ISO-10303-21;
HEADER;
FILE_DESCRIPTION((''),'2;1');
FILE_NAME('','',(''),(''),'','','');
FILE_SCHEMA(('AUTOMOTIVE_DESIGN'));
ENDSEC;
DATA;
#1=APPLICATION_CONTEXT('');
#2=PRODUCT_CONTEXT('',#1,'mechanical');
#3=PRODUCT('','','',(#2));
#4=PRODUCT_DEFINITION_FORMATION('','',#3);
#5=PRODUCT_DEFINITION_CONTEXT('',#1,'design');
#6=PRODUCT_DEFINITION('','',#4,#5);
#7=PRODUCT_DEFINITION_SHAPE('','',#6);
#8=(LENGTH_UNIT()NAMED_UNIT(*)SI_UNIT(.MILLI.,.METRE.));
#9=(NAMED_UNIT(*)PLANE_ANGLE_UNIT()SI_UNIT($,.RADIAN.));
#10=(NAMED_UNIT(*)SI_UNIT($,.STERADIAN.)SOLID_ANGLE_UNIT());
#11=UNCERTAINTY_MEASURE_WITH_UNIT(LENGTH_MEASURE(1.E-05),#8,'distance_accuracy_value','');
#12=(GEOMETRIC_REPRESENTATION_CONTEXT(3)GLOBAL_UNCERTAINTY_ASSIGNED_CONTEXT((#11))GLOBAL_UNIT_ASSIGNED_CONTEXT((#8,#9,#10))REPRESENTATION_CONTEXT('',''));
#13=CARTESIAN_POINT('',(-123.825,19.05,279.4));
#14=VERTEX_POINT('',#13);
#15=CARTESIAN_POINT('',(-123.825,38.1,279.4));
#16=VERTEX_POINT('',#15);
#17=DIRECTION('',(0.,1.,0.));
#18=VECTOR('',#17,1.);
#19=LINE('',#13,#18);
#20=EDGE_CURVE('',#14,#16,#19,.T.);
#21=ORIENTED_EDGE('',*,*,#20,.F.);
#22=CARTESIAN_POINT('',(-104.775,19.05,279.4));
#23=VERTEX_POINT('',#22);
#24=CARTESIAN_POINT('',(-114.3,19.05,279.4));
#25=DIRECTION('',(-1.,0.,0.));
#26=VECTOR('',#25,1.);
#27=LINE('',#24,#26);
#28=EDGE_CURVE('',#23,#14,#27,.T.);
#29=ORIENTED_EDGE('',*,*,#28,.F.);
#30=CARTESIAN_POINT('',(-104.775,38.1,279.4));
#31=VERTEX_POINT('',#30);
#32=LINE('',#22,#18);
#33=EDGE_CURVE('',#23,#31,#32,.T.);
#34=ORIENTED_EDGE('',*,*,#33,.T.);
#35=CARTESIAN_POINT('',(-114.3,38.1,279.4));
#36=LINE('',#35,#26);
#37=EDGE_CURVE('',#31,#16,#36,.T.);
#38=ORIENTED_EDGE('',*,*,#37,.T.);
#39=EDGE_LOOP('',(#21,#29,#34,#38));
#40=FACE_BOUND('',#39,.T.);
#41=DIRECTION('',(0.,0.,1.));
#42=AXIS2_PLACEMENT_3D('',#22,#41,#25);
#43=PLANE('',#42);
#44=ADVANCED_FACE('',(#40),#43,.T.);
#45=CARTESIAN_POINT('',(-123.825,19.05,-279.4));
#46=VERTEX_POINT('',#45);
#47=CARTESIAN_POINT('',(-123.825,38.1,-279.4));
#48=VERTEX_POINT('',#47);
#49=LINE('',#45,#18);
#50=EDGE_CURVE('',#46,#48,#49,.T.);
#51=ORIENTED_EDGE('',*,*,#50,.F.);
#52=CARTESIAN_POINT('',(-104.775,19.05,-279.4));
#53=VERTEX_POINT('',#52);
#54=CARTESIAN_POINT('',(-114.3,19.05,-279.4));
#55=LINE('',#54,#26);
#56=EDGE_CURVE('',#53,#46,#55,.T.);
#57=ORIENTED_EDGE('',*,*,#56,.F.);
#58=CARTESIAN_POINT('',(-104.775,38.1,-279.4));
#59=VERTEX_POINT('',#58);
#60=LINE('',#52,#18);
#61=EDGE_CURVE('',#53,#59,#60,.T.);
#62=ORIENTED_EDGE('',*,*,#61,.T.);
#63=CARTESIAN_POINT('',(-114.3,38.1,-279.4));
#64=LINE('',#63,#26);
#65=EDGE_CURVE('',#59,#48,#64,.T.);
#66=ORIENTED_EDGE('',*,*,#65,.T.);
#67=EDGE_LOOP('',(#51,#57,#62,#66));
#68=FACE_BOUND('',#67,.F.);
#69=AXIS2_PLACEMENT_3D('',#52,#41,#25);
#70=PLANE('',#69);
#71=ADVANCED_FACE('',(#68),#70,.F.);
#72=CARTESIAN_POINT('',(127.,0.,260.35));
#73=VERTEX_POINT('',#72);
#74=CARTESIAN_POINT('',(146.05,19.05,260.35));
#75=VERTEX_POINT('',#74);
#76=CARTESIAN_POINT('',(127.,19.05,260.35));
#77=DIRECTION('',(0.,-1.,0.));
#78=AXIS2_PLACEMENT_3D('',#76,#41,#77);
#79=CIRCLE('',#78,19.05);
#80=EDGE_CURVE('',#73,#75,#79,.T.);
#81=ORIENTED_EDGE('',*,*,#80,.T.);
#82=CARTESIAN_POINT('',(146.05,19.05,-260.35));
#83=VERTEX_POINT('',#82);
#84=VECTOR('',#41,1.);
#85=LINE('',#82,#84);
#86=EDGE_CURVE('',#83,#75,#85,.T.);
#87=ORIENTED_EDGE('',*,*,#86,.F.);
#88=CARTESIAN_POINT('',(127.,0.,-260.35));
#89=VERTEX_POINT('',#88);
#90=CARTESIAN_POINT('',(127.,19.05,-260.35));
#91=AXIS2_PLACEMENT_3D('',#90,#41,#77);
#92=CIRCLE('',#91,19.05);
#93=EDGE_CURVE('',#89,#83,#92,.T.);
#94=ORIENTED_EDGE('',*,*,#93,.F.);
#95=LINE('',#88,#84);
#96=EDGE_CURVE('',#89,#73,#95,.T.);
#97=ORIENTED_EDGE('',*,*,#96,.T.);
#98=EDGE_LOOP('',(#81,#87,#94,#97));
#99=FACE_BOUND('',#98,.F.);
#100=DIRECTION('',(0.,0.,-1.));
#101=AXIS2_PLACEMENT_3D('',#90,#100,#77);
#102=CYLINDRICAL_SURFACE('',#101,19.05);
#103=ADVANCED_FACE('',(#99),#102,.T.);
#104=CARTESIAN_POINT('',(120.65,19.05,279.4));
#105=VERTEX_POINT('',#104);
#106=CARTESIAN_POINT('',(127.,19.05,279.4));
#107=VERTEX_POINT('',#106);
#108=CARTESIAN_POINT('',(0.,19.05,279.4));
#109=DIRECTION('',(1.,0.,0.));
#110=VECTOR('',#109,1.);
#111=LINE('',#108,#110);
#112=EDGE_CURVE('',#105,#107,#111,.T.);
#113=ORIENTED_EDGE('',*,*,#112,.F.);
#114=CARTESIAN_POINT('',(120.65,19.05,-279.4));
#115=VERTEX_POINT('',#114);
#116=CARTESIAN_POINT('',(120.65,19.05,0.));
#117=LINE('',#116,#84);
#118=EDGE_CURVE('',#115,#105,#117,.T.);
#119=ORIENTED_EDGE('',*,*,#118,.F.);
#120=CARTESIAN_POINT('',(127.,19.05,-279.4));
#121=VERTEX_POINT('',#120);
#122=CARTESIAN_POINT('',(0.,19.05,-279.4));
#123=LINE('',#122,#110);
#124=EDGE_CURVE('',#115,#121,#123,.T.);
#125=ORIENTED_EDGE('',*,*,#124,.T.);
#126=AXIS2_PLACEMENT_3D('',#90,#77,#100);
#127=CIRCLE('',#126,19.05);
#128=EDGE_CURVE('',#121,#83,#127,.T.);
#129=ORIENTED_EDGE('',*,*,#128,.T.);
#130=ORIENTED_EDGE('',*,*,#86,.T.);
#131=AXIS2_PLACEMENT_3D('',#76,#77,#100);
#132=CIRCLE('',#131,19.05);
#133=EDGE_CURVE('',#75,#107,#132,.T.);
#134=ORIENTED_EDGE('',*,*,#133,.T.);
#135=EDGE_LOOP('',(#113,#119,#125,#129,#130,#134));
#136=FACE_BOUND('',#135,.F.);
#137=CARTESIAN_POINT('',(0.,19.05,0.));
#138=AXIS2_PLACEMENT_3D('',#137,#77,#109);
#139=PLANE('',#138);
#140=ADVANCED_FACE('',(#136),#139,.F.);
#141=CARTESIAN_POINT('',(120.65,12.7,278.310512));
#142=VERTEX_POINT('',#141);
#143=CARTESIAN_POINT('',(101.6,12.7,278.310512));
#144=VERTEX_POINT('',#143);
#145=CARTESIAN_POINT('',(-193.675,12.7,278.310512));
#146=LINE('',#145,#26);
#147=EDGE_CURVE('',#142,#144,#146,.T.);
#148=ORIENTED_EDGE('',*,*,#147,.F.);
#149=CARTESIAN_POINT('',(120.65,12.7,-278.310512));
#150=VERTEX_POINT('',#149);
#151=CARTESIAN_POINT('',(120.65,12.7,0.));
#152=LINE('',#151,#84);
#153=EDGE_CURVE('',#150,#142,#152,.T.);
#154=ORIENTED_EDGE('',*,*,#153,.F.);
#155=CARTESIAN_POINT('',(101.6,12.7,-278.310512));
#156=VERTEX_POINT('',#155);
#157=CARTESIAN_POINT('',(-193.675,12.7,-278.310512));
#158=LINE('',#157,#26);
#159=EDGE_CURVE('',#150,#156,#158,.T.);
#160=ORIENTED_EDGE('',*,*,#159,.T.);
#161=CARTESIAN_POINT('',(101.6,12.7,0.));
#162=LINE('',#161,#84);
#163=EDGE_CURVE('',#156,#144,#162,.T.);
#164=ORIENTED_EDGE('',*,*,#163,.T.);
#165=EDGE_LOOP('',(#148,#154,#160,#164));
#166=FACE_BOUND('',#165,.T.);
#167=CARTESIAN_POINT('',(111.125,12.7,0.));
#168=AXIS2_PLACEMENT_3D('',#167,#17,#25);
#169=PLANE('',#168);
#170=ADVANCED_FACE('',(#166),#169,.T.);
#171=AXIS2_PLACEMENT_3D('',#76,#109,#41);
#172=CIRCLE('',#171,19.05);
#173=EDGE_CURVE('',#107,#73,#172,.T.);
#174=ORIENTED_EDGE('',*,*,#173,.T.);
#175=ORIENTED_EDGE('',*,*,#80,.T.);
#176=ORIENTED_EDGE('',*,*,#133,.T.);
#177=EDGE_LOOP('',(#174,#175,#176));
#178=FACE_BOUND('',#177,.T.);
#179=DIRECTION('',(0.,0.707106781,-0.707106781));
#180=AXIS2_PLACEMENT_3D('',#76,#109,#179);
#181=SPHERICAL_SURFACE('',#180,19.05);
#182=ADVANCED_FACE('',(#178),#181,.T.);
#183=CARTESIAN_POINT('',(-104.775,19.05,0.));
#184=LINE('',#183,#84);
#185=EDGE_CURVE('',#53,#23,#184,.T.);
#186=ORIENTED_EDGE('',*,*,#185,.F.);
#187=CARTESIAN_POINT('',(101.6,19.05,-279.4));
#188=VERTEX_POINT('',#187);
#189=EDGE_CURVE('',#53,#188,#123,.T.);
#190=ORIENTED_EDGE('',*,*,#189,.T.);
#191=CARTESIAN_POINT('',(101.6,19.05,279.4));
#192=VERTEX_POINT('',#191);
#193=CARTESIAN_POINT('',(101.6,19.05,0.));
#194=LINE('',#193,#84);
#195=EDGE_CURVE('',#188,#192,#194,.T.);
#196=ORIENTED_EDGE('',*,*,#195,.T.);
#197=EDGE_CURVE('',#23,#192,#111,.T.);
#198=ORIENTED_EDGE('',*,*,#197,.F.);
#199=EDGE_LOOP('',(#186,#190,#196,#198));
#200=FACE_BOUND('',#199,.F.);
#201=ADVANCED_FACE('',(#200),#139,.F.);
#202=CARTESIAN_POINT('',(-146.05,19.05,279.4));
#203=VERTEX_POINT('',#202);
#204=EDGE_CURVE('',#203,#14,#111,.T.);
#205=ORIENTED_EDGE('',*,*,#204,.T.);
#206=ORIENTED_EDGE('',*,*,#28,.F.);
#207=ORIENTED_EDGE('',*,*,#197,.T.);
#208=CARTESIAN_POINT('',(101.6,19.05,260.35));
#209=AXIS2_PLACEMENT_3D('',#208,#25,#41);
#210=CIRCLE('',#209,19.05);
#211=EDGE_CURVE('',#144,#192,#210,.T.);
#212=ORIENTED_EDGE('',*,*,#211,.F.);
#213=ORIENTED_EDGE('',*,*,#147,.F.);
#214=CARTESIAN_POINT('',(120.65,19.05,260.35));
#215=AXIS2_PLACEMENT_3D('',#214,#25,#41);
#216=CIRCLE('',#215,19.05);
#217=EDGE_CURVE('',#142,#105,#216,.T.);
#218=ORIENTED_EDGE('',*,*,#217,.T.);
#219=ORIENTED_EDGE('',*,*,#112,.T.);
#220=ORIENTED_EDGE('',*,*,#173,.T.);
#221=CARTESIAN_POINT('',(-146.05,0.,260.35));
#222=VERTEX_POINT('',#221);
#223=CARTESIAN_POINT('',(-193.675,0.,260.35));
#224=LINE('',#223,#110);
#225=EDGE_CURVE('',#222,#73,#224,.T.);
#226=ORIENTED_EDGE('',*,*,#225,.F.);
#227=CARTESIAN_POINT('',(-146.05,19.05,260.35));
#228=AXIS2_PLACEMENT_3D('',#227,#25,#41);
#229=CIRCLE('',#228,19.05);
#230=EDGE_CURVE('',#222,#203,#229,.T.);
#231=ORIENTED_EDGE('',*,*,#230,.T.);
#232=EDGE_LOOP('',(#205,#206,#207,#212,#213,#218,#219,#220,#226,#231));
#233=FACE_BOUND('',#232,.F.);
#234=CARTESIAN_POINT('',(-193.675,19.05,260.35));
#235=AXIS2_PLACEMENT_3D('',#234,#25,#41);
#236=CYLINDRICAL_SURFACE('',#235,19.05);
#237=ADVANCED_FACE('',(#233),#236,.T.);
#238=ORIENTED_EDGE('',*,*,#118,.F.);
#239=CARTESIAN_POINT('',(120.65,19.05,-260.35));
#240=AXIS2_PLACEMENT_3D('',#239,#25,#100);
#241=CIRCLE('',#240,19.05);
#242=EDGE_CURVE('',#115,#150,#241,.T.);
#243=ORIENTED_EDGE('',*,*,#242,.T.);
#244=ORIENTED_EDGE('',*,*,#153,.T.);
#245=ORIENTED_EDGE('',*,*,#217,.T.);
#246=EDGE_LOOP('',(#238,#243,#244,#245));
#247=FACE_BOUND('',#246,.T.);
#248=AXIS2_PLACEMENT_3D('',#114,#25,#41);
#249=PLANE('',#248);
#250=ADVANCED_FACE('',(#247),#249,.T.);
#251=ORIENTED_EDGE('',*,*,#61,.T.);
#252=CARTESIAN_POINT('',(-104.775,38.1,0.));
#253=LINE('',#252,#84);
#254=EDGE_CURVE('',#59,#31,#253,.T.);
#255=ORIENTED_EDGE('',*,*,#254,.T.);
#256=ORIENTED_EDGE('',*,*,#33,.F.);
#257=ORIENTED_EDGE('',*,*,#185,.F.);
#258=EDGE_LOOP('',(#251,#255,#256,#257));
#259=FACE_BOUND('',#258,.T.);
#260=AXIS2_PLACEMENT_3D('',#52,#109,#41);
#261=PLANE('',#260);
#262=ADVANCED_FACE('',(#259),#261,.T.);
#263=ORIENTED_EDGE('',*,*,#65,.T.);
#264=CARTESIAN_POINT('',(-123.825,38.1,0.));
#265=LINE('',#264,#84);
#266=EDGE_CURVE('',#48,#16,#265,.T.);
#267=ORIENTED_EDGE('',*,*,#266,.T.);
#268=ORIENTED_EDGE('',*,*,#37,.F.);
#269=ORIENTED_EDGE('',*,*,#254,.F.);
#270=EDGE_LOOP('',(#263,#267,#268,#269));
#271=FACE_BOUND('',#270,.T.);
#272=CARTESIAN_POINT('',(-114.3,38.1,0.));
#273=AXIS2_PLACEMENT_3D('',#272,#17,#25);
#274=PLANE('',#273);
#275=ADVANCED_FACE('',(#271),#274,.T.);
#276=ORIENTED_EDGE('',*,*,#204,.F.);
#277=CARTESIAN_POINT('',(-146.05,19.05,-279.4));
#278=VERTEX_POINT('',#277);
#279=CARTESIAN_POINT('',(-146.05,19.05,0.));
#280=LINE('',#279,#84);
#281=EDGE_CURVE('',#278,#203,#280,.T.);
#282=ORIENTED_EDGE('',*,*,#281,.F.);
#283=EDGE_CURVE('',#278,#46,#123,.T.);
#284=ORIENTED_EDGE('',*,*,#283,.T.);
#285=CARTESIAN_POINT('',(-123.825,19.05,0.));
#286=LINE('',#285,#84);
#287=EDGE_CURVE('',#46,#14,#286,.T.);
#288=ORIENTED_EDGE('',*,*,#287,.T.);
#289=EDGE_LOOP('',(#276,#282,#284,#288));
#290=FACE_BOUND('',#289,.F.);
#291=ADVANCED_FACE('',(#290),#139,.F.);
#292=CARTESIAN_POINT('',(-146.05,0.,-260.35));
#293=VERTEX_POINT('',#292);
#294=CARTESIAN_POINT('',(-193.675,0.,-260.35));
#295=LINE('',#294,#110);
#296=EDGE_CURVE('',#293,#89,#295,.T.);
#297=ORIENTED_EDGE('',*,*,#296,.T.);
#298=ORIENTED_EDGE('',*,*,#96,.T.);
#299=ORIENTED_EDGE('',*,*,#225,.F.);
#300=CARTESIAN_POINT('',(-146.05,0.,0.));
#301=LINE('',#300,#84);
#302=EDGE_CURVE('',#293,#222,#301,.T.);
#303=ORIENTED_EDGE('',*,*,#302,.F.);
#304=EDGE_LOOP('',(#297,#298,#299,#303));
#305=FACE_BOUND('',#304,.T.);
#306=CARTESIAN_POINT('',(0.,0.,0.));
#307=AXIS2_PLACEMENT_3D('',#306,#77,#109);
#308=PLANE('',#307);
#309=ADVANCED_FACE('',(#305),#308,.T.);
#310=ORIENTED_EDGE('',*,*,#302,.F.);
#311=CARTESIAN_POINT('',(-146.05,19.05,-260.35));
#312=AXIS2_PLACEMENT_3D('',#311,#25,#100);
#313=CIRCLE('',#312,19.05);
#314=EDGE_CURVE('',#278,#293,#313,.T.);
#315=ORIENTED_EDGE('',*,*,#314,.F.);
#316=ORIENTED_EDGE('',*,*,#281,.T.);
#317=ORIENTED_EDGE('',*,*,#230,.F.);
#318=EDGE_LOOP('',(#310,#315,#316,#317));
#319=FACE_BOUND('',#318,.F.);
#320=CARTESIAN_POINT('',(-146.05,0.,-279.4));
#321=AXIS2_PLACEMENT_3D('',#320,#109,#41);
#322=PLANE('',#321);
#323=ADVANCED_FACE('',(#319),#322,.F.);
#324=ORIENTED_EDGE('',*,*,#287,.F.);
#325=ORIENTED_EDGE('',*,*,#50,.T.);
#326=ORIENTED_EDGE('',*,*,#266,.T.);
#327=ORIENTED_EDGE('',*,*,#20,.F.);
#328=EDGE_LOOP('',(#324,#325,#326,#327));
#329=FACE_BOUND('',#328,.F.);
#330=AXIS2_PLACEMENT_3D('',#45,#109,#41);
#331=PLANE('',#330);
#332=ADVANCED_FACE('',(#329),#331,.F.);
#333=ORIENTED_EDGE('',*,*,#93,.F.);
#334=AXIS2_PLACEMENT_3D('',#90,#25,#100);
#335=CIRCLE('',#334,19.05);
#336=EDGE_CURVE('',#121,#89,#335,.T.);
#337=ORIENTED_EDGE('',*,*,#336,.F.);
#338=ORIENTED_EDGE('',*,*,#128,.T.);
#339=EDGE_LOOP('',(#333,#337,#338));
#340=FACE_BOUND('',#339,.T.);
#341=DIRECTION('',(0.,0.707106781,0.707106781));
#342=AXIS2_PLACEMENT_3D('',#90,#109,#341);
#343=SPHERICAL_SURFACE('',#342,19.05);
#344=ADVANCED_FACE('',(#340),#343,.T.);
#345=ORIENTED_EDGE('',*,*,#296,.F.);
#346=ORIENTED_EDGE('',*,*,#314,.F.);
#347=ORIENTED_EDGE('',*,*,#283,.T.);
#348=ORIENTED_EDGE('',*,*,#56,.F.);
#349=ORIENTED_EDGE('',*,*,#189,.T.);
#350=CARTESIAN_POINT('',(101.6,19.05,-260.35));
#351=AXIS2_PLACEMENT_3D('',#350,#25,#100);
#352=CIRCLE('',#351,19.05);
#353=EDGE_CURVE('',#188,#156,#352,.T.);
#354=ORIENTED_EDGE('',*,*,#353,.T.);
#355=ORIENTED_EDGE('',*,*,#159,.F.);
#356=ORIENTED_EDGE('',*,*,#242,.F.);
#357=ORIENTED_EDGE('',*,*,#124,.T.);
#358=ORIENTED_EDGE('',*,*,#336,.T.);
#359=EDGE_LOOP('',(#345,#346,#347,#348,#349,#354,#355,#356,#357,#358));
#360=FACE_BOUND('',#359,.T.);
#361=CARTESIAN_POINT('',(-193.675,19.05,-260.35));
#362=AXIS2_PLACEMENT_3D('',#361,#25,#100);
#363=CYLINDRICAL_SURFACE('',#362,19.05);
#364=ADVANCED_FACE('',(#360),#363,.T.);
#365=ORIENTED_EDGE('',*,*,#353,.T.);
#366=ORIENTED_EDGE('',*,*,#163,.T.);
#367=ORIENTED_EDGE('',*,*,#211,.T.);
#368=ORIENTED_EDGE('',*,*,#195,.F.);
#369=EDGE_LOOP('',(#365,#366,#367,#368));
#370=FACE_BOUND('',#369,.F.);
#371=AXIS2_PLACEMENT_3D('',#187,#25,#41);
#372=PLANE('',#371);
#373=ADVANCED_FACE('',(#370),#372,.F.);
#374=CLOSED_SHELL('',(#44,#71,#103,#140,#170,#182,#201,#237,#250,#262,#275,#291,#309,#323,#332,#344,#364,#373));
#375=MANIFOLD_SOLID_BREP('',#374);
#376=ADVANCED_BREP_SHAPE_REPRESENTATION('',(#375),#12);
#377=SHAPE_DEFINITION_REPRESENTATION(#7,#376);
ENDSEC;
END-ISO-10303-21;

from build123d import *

# Parameters (mm, degrees)
F0_W         = 292.1
F0_H         = 558.8
F1_DEPTH     = 19.05
F3_W         = 19.05
F3_H         = 558.8
F4_DEPTH     = 6.35
F5_T1_DEPTH  = 320.675
F5_T3_DEPTH  = 520.7
F5_T5_DEPTH  = 47.625
F5_S9_W      = 19.05
F5_S9_H      = 19.05
F5_T10_DEPTH = 19.05
F5_S15_W     = 19.05
F5_S15_H     = 19.05
F5_T16_DEPTH = 19.05
F6_W         = 19.05
F6_H         = 558.8
F7_DEPTH     = 19.05


# Not quite as in the source:
# - a fillet or chamfer that OpenCascade refuses, or shapes differently, is made with other operations: its cross-section is extruded or revolved along the edge and cut away or added


with BuildPart() as f1:
    # F0 (on Front) → F1 (new body)
    with BuildSketch(Plane.XZ):
        Rectangle(F0_W, F0_H)
    extrude(amount=-F1_DEPTH)

    # F3 (on face) → F4 (cut)
    with BuildSketch(Plane(origin=(0, 19.05, 0), x_dir=(-1, 0, 0), z_dir=(0, 1, 0))):
        with Locations((-111.125, 0)):
            Rectangle(F3_W, F3_H)
    extrude(amount=-F4_DEPTH, mode=Mode.SUBTRACT)

    # F5: fillet of radius 19.05 on 5 edges, made by hand

    # F5_s2 → F5_t1 (cut)
    with BuildSketch(Plane.YZ.offset(-193.675)):
        with BuildLine():
            ThreePointArc((19.05, -279.4), (5.5796158184, -273.8203841816), (0, -260.35))
            Line((0, -260.35), (0, -279.4))
            Line((0, -279.4), (19.05, -279.4))
        make_face()
        with BuildLine():
            ThreePointArc((19.05, 279.4), (5.5796158184, 273.8203841816), (0, 260.35))
            Line((0, 260.35), (0, 279.4))
            Line((0, 279.4), (19.05, 279.4))
        make_face()
    extrude(amount=F5_T1_DEPTH, mode=Mode.SUBTRACT)

    # F5_s4 → F5_t3 (cut)
    with BuildSketch(Plane.XY.offset(-260.35)):
        with BuildLine():
            ThreePointArc((127, 0), (140.4703841816, 5.5796158184), (146.05, 19.05))
            Line((146.05, 19.05), (146.05, 0))
            Line((146.05, 0), (127, 0))
        make_face()
    extrude(amount=F5_T3_DEPTH, mode=Mode.SUBTRACT)

    # F5_s6 → F5_t5 (cut)
    with BuildSketch(Plane.XZ.offset(-66.675)):
        with BuildLine():
            ThreePointArc((127, -279.4), (140.4703841816, -273.8203841816), (146.05, -260.35))
            Line((146.05, -260.35), (146.05, -279.4))
            Line((146.05, -279.4), (127, -279.4))
        make_face()
        with BuildLine():
            ThreePointArc((127, 279.4), (140.4703841816, 273.8203841816), (146.05, 260.35))
            Line((146.05, 260.35), (146.05, 279.4))
            Line((146.05, 279.4), (127, 279.4))
        make_face()
    extrude(amount=F5_T5_DEPTH, mode=Mode.SUBTRACT)


with BuildPart() as f5_tool8:
    # F5_s9 → F5_t10 (new body)
    with BuildSketch(Plane.YZ.offset(127)):
        with Locations((9.525, -269.875)):
            Rectangle(F5_S9_W, F5_S9_H)
    extrude(amount=F5_T10_DEPTH)

    # F5_s11 → F5_t12 (revolve, cut)
    with BuildSketch(Plane(origin=(127, 19.05, -260.35), x_dir=(0, 0.7071067812, 0.7071067812), z_dir=(0, 0.7071067812, -0.7071067812))):
        with BuildLine():
            ThreePointArc((0, -19.05), (19.05, 0), (0, 19.05))
            Line((0, 19.05), (0, -19.05))
        make_face()
    revolve(axis=Axis((127, 19.05, -260.35), (1, 0, 0)), mode=Mode.SUBTRACT)


with BuildPart() as f1_1:
    add(f1.part)

    # F5_t7: cut F5_tool8
    add(f5_tool8.part, mode=Mode.SUBTRACT)


with BuildPart() as f5_tool14:
    # F5_s15 → F5_t16 (new body)
    with BuildSketch(Plane.YZ.offset(127)):
        with Locations((9.525, 269.875)):
            Rectangle(F5_S15_W, F5_S15_H)
    extrude(amount=F5_T16_DEPTH)

    # F5_s17 → F5_t18 (revolve, cut)
    with BuildSketch(Plane(origin=(127, 19.05, 260.35), x_dir=(0, 0.7071067812, -0.7071067812), z_dir=(0, -0.7071067812, -0.7071067812))):
        with BuildLine():
            ThreePointArc((0, -19.05), (19.05, 0), (0, 19.05))
            Line((0, 19.05), (0, -19.05))
        make_face()
    revolve(axis=Axis((127, 19.05, 260.35), (1, 0, 0)), mode=Mode.SUBTRACT)


with BuildPart() as f1_2:
    add(f1_1.part)

    # F5_t13: cut F5_tool14
    add(f5_tool14.part, mode=Mode.SUBTRACT)

    # F6 (on face) → F7 (join)
    with BuildSketch(Plane(origin=(0, 19.05, 0), x_dir=(-1, 0, 0), z_dir=(0, 1, 0))):
        with Locations((114.3, 0)):
            Rectangle(F6_W, F6_H)
    extrude(amount=F7_DEPTH)


solid = f1_2.part
